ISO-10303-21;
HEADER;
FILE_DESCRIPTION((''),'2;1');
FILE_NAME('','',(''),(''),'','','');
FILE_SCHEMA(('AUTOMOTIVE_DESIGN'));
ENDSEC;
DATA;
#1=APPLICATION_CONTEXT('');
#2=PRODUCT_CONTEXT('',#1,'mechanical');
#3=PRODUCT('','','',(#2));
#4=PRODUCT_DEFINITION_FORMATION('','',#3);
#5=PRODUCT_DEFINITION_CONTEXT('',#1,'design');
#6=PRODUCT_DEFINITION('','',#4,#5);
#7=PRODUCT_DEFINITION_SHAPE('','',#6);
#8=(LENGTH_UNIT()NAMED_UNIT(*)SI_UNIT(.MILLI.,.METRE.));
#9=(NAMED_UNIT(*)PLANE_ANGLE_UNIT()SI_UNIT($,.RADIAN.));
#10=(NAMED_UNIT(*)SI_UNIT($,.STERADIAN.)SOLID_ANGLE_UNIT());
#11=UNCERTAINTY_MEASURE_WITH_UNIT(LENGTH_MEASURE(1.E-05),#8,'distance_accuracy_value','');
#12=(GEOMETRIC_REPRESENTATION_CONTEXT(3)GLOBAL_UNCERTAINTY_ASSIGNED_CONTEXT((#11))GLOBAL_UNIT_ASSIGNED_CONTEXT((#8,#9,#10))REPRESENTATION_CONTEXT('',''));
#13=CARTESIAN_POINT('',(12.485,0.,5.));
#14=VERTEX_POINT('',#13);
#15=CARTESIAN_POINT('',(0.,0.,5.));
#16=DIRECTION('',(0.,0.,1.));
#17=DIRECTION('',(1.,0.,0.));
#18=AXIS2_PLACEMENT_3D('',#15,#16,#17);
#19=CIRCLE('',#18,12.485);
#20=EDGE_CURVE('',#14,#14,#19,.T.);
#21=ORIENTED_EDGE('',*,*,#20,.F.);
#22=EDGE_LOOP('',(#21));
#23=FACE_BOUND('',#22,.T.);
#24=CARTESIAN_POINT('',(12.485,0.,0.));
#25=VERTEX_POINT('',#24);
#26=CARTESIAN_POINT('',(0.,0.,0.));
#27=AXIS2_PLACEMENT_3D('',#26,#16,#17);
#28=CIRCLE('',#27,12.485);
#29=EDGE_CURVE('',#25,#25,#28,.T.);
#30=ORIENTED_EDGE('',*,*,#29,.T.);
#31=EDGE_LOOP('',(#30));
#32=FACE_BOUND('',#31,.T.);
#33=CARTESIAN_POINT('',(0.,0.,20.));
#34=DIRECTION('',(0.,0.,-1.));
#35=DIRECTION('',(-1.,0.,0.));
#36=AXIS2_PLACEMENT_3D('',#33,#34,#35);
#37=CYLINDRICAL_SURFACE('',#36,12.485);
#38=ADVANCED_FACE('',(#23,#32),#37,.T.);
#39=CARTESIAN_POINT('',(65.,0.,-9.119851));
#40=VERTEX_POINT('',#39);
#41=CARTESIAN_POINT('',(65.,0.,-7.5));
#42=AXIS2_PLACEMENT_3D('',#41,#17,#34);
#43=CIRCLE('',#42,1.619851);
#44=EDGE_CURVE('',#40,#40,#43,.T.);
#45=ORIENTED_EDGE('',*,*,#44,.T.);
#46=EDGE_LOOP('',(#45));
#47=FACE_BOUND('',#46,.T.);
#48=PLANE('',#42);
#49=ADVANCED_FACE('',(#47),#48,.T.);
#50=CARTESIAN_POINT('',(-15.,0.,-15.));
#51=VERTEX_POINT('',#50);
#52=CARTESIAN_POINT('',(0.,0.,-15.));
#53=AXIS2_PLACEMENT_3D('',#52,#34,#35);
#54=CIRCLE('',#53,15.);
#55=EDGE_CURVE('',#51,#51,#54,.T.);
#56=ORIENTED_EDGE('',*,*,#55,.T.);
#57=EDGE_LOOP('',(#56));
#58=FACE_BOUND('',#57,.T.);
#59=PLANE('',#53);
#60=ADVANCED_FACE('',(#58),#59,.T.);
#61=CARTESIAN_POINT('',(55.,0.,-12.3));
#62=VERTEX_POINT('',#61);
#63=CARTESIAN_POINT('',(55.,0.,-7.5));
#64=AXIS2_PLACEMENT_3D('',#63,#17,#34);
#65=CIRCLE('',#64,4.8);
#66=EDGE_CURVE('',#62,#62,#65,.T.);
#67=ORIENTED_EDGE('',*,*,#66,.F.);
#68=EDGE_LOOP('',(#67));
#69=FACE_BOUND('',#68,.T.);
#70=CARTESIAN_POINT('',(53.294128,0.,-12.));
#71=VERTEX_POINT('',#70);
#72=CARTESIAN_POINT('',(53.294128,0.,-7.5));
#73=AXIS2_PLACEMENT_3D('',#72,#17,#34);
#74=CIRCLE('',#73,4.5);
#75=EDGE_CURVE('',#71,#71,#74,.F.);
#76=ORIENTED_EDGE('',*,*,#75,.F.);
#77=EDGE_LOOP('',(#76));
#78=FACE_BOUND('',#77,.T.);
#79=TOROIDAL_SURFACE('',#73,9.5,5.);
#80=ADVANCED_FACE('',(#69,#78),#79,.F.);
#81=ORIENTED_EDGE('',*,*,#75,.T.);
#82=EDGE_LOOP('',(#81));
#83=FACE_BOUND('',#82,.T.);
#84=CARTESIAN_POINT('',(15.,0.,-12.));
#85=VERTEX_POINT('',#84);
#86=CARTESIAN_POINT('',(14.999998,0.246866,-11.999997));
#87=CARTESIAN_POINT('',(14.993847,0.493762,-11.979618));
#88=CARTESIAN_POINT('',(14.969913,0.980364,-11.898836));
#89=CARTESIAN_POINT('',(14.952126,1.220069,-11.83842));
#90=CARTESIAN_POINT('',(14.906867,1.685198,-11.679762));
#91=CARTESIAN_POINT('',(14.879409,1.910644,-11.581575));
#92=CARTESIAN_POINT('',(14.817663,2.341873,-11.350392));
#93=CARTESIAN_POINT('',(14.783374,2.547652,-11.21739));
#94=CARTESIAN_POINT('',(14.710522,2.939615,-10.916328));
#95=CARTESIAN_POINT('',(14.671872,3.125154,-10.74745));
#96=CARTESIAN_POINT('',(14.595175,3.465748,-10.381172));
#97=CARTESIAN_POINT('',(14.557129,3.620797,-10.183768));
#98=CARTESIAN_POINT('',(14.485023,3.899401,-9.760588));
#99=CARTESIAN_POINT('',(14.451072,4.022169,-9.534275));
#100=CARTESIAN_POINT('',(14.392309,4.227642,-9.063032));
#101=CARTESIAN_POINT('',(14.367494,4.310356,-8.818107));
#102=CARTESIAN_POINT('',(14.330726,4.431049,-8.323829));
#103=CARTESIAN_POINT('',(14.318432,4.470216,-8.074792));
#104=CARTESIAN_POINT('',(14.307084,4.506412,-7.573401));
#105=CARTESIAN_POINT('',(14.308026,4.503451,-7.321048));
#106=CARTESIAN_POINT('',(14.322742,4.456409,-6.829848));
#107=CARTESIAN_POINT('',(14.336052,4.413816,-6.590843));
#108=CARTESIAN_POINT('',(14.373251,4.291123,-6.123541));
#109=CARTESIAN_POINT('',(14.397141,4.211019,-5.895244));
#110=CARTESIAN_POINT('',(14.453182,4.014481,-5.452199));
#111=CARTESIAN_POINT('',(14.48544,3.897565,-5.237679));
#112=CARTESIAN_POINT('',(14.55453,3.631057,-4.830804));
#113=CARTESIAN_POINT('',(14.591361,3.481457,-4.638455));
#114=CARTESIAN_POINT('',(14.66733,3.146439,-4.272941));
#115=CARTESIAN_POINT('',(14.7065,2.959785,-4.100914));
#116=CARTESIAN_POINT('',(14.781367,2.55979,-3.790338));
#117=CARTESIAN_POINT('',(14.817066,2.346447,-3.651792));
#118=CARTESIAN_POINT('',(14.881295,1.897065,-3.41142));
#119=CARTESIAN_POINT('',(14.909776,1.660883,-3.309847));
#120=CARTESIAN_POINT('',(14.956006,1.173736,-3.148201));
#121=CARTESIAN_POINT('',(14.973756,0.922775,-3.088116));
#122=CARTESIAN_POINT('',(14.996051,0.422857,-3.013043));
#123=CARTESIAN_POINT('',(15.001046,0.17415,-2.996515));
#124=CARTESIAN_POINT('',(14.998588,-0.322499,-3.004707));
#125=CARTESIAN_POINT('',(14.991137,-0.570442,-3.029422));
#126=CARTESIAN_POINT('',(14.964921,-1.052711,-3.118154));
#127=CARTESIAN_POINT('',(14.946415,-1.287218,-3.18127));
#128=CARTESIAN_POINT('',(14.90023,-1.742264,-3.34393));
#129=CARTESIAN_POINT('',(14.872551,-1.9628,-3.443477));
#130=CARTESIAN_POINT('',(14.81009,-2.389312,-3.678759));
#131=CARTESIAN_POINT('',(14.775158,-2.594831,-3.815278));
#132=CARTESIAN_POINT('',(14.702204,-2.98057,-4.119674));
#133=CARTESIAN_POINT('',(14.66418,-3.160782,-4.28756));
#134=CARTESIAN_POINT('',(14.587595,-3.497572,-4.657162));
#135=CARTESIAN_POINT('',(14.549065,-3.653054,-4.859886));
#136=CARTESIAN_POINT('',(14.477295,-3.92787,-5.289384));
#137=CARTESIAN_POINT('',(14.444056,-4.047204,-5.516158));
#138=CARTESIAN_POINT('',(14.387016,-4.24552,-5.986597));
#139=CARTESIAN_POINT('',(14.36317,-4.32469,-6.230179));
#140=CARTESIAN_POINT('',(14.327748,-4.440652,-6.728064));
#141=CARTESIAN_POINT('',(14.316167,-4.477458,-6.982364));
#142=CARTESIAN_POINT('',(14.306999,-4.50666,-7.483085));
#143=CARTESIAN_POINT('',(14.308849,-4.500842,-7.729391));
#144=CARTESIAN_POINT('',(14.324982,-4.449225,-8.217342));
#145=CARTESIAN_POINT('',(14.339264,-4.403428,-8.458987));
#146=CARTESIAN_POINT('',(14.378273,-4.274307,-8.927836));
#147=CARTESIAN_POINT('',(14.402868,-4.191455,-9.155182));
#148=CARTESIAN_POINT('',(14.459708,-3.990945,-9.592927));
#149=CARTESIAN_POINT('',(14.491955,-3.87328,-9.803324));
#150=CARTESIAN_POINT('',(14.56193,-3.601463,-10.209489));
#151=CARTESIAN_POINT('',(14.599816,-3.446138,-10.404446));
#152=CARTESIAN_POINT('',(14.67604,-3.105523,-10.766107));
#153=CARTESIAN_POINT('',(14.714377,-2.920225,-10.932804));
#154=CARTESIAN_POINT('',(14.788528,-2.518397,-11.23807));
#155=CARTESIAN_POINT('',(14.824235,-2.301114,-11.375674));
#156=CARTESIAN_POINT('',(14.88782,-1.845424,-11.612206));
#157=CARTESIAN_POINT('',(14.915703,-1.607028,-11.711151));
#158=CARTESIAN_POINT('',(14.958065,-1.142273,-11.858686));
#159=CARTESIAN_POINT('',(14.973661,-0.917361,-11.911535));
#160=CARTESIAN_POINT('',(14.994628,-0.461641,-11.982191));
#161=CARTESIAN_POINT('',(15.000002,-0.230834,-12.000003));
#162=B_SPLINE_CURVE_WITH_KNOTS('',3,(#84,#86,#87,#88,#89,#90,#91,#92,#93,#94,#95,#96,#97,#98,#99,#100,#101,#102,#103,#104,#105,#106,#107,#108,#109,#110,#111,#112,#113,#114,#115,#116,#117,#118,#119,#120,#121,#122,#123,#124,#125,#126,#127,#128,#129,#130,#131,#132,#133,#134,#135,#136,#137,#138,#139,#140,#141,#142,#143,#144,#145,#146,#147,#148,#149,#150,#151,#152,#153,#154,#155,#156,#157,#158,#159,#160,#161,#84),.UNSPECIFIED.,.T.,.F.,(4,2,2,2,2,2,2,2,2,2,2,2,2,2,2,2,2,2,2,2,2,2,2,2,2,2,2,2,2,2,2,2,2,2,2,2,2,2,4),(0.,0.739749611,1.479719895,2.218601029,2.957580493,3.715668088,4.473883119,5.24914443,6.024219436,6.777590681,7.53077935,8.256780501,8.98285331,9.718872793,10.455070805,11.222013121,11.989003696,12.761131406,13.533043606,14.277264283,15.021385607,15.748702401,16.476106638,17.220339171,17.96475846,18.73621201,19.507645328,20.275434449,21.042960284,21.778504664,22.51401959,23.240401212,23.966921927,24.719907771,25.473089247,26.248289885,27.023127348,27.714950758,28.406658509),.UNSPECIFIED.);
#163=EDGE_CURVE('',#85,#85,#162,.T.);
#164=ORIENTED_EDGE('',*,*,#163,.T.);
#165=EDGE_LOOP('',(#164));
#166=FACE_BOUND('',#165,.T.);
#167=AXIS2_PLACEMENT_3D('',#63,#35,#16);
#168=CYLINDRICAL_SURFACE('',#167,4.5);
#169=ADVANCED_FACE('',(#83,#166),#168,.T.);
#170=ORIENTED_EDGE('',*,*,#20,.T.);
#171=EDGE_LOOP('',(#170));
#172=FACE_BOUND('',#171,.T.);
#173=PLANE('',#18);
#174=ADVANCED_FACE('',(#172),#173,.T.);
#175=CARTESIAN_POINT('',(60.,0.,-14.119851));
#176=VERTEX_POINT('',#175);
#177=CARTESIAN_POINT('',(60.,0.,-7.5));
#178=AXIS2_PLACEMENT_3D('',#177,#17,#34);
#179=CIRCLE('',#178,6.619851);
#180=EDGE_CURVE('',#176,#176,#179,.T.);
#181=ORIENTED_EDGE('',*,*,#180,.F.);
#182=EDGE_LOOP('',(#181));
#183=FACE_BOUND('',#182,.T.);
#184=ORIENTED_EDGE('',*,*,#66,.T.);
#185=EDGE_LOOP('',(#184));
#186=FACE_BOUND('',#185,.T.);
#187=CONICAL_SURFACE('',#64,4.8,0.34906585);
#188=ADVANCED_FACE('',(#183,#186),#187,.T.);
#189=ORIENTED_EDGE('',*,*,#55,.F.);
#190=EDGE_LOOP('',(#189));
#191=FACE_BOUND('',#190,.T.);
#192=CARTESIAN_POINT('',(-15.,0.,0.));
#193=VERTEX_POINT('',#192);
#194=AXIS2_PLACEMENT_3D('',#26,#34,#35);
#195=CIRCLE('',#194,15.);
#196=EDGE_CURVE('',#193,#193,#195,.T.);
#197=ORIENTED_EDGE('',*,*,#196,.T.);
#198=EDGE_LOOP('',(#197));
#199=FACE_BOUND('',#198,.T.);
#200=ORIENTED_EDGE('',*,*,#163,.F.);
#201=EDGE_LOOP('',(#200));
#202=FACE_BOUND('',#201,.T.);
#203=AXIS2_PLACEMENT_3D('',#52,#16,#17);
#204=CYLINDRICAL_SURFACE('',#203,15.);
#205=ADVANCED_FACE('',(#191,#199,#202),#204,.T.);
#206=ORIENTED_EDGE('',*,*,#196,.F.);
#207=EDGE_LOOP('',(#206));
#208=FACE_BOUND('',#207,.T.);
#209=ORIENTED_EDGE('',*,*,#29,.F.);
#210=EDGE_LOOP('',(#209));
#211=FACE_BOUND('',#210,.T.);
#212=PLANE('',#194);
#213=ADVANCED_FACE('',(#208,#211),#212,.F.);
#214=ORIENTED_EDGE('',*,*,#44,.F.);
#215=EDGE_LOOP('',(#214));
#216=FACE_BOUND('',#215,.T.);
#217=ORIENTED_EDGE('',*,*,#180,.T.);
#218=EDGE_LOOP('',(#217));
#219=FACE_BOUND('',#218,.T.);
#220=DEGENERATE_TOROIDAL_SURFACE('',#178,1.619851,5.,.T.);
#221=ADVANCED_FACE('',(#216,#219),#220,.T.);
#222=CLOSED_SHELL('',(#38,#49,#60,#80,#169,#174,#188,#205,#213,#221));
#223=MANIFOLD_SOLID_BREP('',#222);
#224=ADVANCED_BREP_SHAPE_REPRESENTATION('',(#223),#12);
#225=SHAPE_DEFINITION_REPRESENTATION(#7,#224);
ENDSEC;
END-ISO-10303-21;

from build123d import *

# Parameters (mm, degrees)
SKETCH1_R           = 12.485
BOSS_EXTRUDE1_DEPTH = 20
SKETCH2_R           = 15
BOSS_EXTRUDE2_DEPTH = 15
SKETCH3_R           = 4.5
BOSS_EXTRUDE3_DEPTH = 55
SKETCH4_R           = 4.8
BOSS_EXTRUDE4_DEPTH = 5
BOSS_EXTRUDE4_DRAFT = -20
SKETCH5_R           = 6.619851171
BOSS_EXTRUDE6_DEPTH = 5
FILLET1_R           = 5
FILLET2_R           = 5
CUT_EXTRUDE2_START  = -15
SKETCH6_R           = 12.485
CUT_EXTRUDE2_DEPTH  = 15


# Some blends are built 0.0001 mm under size
with BuildPart() as part:
    # Sketch1 → Boss-Extrude1 (new body)
    with BuildSketch(Plane.XY):
        Circle(SKETCH1_R)
    extrude(amount=BOSS_EXTRUDE1_DEPTH)

    # Sketch2 → Boss-Extrude2 (add)
    with BuildSketch(Plane(origin=(0, 0, 0), x_dir=(-1, 0, 0), z_dir=(0, 0, -1))):
        Circle(SKETCH2_R)
    extrude(amount=BOSS_EXTRUDE2_DEPTH)

    # Sketch3 → Boss-Extrude3 (add)
    with BuildSketch(Plane(origin=(0, 0, 0), x_dir=(0, 0, -1), z_dir=(1, 0, 0))):
        with Locations((7.5, 0)):
            Circle(SKETCH3_R)
    extrude(amount=BOSS_EXTRUDE3_DEPTH)


with BuildPart() as boss_extrude4_tool:
    # Sketch4 → Boss-Extrude4 (with draft: the straight prism first)
    with BuildSketch(Plane(origin=(55, 0, 0), x_dir=(0, 0, -1), z_dir=(1, 0, 0))):
        with Locations((7.5, 0)):
            Circle(SKETCH4_R)
    extrude(amount=BOSS_EXTRUDE4_DEPTH)
    # Boss-Extrude4: the draft: its side faces are tilted about the plane it starts from
    boss_extrude4_sides = [boss_extrude4_tool.faces().sort_by_distance(p)[0] for p in [
        (57.5, 0, -2.7),
    ]]
    draft(boss_extrude4_sides, Plane(origin=(55, 0, 0), x_dir=(0, 0, -1), z_dir=(1, 0, 0)), BOSS_EXTRUDE4_DRAFT)


with BuildPart() as part_1:
    add(part.part)

    # Boss-Extrude4: add boss_extrude4_tool
    add(boss_extrude4_tool.part)

    # Sketch5 → Boss-Extrude6 (add)
    with BuildSketch(Plane(origin=(60, 0, 0), x_dir=(0, 0, -1), z_dir=(1, 0, 0))):
        with Locations((7.5, 0)):
            Circle(SKETCH5_R)
    extrude(amount=BOSS_EXTRUDE6_DEPTH)

    # Fillet1
    fillet1_edges = [part_1.edges().sort_by_distance(p)[0] for p in [
        (65, 0, -0.880148829),
    ]]
    fillet(fillet1_edges, radius=FILLET1_R - 0.0001)  # a hair under: the kernel refuses the full size

    # Fillet2
    # the kernel refuses this fillet: 5 mm, written as the material it adds along each edge
    with BuildSketch(Plane(origin=(55, 0, -7.5), x_dir=(0, 0, -1), z_dir=(0, -1, 0))) as fillet2_piece_1:
        with BuildLine():
            CenterArc((9.5, -1.705872211), FILLET2_R, 160.051556411, 19.948443589)
            Line((4.5, -1.705872211), (4.4, -1.705872211))
            Line((4.4, -1.705872211), (4.4, 0))
            Line((4.4, 0), (4.5, 0.1))
            ThreePointArc((4.5, 0.1), (4.65, 0.1), (4.706, 0.034117444))
            Line((4.706, 0.034117444), (4.8, 0))
        make_face()
    revolve(axis=Axis((55, 0, -7.5), (1, 0, 0)))

    # Sketch6 → Cut-Extrude2 (cut)
    with BuildSketch(Plane.XY.offset(20).offset(CUT_EXTRUDE2_START)):
        Circle(SKETCH6_R)
    extrude(amount=CUT_EXTRUDE2_DEPTH, mode=Mode.SUBTRACT)


solid = part_1.part
